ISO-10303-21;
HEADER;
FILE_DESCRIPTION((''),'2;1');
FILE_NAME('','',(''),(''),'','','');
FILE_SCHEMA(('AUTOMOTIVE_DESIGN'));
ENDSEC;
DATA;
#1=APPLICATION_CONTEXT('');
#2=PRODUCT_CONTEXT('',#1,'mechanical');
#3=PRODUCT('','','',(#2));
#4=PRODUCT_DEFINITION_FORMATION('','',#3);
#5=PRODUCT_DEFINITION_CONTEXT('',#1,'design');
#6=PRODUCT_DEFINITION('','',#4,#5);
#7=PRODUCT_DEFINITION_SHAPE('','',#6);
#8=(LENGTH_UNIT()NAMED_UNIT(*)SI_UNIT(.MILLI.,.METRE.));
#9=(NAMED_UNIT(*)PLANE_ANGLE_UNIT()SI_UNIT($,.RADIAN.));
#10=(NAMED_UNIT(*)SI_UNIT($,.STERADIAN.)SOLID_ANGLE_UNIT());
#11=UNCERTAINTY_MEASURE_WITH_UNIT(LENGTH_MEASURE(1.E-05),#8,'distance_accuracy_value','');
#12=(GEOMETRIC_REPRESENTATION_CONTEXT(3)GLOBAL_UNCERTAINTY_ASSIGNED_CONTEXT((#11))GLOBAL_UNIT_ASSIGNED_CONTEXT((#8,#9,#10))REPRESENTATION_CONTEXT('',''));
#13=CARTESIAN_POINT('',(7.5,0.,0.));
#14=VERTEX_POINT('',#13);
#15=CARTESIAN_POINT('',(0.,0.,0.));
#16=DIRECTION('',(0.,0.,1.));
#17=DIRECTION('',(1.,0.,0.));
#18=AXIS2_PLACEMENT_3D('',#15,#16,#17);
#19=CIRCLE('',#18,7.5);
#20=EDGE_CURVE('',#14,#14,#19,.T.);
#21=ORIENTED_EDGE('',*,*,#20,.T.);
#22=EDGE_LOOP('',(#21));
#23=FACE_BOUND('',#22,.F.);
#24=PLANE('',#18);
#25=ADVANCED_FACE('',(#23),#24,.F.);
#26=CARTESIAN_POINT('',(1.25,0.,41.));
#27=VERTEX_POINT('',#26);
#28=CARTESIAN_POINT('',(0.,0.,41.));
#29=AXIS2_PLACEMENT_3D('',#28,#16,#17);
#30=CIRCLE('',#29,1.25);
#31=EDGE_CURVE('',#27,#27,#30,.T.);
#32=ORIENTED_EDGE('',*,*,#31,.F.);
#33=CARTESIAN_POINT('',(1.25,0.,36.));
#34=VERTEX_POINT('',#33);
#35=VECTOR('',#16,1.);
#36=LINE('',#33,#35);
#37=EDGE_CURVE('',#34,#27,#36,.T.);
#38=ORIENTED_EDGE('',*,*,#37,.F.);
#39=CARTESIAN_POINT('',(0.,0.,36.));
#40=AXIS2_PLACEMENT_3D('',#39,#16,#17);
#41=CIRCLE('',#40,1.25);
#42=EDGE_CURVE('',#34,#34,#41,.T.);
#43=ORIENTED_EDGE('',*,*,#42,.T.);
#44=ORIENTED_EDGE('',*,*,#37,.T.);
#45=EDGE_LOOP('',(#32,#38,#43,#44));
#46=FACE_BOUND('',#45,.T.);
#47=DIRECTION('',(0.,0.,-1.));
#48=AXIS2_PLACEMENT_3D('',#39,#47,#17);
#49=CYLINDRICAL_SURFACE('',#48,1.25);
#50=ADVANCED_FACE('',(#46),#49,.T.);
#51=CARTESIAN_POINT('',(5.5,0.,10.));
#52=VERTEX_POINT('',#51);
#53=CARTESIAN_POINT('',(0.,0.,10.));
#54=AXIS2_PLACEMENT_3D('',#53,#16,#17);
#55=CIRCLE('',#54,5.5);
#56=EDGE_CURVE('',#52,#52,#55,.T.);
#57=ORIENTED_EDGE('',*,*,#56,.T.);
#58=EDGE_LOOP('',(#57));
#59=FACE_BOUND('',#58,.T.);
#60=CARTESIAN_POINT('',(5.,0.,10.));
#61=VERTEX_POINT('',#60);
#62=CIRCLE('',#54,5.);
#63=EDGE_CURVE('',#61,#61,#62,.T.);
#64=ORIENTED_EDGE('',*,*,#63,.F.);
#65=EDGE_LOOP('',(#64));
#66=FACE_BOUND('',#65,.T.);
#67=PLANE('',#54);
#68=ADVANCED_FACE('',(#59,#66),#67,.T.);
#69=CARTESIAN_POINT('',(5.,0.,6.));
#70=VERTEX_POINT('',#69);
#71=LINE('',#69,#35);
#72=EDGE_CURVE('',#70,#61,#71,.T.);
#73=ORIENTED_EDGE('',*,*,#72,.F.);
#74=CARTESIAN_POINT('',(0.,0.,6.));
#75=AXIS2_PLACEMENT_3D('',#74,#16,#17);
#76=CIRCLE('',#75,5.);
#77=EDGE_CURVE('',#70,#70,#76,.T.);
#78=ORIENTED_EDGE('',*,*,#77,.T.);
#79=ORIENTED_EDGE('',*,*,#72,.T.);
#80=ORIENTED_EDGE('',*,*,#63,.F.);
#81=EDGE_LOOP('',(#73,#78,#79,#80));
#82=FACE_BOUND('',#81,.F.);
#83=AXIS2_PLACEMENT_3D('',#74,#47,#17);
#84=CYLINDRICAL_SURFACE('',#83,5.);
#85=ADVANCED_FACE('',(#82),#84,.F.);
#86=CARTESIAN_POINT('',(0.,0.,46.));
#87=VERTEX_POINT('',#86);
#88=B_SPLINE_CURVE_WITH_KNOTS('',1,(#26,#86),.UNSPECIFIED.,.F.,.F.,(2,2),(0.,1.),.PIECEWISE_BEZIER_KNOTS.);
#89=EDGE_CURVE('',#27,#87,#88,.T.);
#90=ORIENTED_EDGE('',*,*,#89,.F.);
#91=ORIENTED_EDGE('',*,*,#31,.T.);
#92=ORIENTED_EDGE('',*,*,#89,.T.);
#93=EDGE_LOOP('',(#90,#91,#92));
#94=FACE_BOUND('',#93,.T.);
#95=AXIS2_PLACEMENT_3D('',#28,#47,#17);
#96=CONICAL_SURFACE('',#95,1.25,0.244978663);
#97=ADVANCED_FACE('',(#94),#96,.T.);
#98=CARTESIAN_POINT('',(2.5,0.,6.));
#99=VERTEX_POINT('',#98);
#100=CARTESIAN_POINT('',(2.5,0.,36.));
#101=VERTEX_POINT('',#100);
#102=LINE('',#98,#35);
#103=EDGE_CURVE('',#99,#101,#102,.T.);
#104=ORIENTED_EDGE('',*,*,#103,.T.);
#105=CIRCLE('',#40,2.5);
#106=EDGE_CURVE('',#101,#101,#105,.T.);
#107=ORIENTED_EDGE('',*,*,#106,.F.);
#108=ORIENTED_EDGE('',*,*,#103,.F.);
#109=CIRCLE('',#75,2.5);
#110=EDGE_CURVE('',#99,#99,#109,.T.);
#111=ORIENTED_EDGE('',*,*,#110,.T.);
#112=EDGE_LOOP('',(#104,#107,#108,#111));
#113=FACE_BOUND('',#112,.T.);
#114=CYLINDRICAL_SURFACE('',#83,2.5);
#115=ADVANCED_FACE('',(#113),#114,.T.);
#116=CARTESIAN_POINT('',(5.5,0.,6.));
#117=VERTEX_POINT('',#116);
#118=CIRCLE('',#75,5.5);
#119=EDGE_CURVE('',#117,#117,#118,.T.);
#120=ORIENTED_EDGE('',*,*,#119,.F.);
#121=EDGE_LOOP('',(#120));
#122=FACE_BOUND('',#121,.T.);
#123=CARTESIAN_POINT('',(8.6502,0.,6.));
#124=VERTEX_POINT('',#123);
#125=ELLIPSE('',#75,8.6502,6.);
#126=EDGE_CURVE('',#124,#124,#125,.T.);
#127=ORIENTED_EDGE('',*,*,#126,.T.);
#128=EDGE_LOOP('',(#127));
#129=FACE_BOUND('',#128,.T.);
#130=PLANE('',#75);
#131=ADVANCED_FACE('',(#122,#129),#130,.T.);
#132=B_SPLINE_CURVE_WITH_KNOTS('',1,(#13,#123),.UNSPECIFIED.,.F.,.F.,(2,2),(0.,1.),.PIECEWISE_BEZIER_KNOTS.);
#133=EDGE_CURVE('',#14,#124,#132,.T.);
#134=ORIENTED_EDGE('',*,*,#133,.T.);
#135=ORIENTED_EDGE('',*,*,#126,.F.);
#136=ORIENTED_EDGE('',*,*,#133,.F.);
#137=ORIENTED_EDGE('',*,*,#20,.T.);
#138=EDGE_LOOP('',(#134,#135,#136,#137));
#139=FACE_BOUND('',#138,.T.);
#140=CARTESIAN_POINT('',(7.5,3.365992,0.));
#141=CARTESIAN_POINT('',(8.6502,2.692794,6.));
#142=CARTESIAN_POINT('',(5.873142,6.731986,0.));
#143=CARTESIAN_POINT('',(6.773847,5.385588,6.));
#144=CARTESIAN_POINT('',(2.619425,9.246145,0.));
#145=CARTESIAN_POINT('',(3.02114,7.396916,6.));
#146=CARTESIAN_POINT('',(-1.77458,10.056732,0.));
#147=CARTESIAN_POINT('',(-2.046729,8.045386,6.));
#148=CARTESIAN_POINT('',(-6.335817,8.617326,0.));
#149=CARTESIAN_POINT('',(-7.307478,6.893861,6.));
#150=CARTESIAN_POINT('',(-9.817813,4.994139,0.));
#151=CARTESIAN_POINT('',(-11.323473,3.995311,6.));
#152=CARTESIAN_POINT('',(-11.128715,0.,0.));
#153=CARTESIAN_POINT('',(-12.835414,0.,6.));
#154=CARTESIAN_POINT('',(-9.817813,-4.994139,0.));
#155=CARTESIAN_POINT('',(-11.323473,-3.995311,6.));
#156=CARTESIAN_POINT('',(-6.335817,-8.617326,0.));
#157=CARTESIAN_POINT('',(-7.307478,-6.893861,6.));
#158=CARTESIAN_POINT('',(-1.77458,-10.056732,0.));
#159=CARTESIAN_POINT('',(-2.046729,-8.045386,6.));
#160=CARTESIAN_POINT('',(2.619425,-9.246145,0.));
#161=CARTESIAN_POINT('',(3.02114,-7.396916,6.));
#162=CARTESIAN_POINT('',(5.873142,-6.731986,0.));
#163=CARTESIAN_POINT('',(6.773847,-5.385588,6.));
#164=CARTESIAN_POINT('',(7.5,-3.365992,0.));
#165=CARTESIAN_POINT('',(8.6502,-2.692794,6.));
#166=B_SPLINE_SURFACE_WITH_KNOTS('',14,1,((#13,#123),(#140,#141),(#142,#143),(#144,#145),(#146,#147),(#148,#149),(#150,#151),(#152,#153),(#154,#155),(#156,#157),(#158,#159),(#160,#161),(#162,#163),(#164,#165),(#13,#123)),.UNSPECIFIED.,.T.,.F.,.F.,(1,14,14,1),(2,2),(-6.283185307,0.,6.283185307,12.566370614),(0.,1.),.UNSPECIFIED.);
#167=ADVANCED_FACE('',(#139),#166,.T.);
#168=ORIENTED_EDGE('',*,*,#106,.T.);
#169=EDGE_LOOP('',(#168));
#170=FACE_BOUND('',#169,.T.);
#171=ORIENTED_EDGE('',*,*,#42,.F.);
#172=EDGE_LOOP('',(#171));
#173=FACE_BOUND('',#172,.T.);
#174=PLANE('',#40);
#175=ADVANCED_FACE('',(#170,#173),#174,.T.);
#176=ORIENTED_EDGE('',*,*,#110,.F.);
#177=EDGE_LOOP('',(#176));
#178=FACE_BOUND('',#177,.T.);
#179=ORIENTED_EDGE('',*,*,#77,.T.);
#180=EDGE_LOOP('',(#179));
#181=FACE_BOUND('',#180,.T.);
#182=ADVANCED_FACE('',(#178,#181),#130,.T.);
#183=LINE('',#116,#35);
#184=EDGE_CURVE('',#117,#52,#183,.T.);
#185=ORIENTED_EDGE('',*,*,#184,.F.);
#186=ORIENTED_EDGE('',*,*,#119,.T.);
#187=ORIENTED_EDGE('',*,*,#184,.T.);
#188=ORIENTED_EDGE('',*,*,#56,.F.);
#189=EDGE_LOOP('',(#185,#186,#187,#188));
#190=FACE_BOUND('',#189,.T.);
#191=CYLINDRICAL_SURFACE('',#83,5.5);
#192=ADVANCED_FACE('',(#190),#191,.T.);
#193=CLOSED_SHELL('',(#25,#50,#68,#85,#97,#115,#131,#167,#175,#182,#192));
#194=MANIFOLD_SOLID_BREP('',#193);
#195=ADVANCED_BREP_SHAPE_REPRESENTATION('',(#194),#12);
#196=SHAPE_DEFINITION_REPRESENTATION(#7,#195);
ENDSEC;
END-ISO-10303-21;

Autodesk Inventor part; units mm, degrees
ref_plane "YZ Plane" through (0, 0, 0) normal (1, 0, 0) x (0, 1, 0)
sketch "Sketch1" plane through (0, 0, 0) normal (0, 0, 1) x (1, 0, 0)
  circle A0 centre (0, 0) radius 7.5
  dimension "d0" = 15
ref_plane "Work Plane1" through (0, 0, 6) normal (0, 0, 1) x (1, 0, 0)
sketch "Sketch2" plane through (0, 0, 6) normal (0, 0, 1) x (1, 0, 0)
  ellipse E0 centre (0, 0) end of major axis (8.6502, 0) minor radius 6
  line L0 (0, 0) -> (-7.5, 0)
  dimension "d26" = 7.5
loft "Loft1" add profiles "Sketch1", "Sketch2"
sketch "Sketch3" plane through (0, 0, 6) normal (0, 0, 1) x (1, 0, 0)
  circle A0 centre (0, 0) radius 5
  circle A1 centre (0, 0) radius 5.5
  dimension "d11" = 10
  dimension "d12" = 11
extrude "Extrusion2" add sketch "Sketch3" along normal blind 4
sketch "Sketch4" plane through (0, 0, 6) normal (0, 0, 1) x (1, 0, 0)
  circle A0 centre (0, 0) radius 2.5
  dimension "d15" = 5
extrude "Extrusion3" add sketch "Sketch4" along normal blind 30
sketch "Sketch5" plane through (0, 0, 36) normal (0, 0, 1) x (1, 0, 0)
  circle A0 centre (0, 0) radius 1.25
  dimension "d18" = 2.5
extrude "Extrusion4" add sketch "Sketch5" along normal blind 5
sketch "Sketch6" plane through (0, 0, 41) normal (0, 0, 1) x (1, 0, 0)
  point P0 (0, 0)
ref_plane "Work Plane2" through (0, 0, 46) normal (0, 0, 1) x (1, 0, 0)
sketch "Sketch7" plane through (0, 0, 46) normal (0, 0, 1) x (1, 0, 0)
  point P0 (0, 0)
  point P1 (0, 0)
loft "Loft2" add section 1 edges at (-1.25, 0, 41) section 2 point at (0, 0, 46)
properties part number "Solder"
